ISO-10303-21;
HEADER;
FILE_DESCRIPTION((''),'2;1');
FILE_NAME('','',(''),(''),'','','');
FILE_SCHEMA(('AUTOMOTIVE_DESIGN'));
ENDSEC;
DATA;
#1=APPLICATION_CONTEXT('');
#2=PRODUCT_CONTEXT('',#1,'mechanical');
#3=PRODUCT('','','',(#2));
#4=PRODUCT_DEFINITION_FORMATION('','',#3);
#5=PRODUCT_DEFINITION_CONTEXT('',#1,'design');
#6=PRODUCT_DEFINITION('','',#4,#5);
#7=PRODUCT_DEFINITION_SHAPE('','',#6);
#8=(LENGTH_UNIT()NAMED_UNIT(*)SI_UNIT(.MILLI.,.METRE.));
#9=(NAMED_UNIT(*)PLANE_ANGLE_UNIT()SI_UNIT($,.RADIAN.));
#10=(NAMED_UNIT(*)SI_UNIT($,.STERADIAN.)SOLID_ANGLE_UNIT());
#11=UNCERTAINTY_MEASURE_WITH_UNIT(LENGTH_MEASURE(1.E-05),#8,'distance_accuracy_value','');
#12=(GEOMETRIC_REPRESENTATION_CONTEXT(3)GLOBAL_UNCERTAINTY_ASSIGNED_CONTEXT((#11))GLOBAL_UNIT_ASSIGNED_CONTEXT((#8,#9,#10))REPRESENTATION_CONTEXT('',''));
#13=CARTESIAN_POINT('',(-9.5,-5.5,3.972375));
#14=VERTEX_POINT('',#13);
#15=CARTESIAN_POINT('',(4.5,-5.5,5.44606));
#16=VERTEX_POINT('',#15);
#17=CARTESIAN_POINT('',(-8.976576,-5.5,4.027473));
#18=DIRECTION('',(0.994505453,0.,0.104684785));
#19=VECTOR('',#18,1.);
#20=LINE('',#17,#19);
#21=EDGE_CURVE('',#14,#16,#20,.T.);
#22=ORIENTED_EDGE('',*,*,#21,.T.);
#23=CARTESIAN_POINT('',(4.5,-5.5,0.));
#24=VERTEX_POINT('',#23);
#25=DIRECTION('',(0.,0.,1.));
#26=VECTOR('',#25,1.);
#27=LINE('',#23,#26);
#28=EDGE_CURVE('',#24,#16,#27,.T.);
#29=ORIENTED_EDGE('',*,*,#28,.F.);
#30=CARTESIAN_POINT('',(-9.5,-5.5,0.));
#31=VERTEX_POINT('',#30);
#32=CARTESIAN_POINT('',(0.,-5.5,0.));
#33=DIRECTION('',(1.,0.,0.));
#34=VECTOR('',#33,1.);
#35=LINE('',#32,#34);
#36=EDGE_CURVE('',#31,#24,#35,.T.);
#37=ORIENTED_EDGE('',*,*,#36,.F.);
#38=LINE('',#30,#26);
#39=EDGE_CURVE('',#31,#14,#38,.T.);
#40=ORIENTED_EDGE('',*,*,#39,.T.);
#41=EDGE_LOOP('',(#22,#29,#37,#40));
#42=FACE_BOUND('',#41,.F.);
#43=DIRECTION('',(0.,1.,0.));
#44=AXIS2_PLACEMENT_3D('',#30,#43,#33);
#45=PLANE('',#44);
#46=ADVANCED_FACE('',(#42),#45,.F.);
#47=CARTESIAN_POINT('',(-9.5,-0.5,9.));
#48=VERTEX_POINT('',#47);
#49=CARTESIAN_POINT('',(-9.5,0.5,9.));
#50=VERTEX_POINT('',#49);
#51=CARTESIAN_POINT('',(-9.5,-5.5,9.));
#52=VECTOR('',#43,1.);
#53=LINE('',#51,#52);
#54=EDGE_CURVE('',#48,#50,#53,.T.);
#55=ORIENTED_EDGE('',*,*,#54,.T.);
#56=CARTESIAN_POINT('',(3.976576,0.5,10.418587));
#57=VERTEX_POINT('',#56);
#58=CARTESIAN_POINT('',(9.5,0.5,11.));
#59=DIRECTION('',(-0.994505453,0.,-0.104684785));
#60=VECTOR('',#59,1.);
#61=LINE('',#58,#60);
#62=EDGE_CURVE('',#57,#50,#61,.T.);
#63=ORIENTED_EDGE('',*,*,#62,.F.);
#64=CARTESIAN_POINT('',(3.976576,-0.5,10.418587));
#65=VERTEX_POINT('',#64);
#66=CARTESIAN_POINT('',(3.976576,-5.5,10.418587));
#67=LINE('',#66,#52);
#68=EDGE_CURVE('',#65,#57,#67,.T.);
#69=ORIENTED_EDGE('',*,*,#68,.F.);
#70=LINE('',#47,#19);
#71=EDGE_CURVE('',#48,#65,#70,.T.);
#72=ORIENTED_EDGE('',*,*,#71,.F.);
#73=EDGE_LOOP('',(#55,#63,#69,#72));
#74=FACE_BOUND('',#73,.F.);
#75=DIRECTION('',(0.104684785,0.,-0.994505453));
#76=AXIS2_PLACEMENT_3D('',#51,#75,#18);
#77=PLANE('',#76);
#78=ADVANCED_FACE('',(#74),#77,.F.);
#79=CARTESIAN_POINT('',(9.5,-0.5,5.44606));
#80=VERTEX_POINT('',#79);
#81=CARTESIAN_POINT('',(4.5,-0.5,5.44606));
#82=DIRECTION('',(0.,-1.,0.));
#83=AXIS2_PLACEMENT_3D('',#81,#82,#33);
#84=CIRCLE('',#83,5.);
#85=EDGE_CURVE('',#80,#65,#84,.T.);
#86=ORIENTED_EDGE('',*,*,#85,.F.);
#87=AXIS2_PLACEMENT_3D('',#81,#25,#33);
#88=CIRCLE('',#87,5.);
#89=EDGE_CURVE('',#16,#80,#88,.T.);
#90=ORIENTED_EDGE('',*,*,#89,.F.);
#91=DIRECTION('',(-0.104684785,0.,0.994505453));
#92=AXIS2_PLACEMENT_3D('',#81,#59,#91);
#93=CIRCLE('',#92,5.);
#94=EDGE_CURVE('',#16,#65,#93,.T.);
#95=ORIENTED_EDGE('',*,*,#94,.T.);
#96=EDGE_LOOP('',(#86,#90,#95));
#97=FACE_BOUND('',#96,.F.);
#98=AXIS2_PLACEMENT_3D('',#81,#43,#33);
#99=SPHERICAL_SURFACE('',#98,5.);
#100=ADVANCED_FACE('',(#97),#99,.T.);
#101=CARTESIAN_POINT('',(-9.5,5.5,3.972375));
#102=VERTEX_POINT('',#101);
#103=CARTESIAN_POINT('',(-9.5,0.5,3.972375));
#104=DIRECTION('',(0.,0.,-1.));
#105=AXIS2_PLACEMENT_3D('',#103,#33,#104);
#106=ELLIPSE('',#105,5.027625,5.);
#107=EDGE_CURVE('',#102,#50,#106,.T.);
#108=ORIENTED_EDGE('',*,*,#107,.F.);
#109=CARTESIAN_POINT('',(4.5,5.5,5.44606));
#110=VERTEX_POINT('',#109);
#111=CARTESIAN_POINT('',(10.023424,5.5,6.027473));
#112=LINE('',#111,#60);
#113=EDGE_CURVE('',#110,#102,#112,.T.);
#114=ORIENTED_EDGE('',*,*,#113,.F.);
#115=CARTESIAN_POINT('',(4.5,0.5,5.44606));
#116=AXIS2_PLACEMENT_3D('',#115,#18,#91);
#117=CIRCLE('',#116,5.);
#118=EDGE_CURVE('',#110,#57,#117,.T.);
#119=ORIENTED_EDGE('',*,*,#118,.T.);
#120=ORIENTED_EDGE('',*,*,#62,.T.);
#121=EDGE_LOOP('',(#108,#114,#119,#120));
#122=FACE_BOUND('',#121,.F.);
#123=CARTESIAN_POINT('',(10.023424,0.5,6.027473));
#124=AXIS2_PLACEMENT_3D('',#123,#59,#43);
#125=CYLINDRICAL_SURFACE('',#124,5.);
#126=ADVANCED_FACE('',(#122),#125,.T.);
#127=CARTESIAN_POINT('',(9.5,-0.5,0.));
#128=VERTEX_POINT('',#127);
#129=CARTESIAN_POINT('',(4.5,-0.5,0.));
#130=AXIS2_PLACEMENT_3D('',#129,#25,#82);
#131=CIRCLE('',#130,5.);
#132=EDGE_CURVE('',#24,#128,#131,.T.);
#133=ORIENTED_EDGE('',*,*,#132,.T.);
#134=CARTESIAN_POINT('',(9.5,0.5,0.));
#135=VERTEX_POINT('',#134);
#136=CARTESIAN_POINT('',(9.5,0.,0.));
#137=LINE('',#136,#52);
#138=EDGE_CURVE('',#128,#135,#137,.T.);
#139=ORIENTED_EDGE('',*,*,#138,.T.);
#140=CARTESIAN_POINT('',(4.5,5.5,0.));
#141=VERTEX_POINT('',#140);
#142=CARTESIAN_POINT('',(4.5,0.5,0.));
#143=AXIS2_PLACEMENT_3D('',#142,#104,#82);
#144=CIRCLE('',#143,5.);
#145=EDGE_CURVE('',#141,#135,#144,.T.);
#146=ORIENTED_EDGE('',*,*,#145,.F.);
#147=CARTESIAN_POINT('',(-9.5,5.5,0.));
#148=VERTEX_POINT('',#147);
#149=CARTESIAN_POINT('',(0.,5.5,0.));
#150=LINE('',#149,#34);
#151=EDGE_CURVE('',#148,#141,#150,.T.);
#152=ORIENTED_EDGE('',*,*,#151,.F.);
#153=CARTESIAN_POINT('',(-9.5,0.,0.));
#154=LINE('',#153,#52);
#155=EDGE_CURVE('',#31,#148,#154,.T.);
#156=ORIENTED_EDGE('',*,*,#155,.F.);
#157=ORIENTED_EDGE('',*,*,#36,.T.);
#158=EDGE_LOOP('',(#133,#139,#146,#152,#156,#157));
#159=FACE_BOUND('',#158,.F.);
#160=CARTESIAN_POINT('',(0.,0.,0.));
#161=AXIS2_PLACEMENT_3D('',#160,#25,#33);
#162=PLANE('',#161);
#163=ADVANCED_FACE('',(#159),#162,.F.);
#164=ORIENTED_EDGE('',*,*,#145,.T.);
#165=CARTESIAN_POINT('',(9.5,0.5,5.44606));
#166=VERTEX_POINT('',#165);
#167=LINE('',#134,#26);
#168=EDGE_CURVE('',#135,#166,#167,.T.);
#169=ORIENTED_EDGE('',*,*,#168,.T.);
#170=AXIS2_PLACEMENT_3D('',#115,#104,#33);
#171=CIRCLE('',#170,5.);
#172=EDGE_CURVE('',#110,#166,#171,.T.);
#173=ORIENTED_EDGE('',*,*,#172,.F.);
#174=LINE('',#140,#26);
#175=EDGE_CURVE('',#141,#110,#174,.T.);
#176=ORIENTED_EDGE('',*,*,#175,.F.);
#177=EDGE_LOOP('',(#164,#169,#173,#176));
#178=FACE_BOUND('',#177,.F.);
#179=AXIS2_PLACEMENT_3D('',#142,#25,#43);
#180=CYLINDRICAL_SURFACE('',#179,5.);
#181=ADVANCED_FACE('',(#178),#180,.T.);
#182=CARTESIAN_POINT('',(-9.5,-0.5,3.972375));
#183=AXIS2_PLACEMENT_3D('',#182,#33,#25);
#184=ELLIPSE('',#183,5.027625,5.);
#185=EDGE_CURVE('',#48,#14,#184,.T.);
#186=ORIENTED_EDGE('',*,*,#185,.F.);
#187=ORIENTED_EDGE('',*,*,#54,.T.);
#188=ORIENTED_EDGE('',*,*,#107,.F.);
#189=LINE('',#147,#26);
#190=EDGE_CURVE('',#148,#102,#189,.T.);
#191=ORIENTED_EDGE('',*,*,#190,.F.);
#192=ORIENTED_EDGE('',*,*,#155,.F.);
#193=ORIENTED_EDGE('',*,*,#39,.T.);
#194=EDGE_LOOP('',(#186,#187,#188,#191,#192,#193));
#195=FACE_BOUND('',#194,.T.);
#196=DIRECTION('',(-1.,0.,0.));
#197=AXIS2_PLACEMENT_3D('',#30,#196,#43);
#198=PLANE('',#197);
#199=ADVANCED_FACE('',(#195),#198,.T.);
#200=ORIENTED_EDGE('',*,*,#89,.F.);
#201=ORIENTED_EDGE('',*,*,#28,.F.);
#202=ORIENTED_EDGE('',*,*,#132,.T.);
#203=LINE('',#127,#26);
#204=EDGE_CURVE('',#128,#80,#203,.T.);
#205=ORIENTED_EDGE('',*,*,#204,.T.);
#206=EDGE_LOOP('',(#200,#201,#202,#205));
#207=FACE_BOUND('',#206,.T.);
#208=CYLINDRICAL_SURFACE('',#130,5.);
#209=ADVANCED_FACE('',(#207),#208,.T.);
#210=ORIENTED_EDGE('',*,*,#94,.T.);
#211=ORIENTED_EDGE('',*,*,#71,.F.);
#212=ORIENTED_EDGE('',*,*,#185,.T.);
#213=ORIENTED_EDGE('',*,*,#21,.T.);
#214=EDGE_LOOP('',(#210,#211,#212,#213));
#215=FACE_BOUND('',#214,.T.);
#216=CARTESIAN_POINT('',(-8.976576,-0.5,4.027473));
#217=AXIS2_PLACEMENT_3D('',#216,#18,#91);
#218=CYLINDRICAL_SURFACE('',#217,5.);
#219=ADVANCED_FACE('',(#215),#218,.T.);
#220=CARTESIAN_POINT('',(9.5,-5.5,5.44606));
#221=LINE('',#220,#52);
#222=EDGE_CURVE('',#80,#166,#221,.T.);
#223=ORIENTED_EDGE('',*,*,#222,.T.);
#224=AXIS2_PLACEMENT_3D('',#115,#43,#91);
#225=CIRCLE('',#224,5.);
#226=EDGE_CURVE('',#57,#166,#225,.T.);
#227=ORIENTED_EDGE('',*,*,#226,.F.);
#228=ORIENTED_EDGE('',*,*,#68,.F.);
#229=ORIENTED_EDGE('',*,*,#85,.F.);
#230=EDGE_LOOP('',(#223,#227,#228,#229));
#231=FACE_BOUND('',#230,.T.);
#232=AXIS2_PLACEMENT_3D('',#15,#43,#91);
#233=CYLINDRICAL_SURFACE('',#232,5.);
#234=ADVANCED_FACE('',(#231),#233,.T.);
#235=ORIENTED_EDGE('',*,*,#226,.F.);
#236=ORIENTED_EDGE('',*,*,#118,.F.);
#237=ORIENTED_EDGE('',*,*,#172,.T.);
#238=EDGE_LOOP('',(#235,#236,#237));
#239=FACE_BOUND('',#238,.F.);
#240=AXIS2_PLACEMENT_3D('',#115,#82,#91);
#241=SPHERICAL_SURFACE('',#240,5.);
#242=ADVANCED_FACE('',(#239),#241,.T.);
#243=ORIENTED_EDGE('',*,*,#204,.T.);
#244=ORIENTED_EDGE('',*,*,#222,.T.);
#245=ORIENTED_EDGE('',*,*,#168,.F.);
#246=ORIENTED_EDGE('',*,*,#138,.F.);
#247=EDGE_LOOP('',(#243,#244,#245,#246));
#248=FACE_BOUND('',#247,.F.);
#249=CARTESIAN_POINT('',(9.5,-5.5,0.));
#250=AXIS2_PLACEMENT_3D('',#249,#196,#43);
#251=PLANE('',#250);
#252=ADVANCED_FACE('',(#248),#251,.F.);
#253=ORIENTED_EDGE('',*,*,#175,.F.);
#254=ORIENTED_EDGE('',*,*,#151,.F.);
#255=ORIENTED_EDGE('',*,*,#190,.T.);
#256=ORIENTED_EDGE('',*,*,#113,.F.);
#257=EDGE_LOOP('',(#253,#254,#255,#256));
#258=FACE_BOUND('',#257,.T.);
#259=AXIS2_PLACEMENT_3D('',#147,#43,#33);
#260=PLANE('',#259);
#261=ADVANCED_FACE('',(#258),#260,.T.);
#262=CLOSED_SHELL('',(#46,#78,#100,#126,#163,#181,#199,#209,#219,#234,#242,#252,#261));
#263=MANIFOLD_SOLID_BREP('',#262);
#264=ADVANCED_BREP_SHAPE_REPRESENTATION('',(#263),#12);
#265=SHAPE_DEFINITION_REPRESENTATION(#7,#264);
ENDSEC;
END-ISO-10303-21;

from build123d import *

# Parameters (mm, degrees)
F0_W     = 19
F0_H     = 11
F1_DEPTH = 11
F3_DEPTH = 25
F4_R     = 5


with BuildPart() as f1:
    # F0 (on Top) → F1 (new body)
    with BuildSketch(Plane.XY):
        Rectangle(F0_W, F0_H)
    extrude(amount=F1_DEPTH)

    # F2 (on face) → F3 (cut)
    with BuildSketch(Plane.XZ.offset(5.5)):
        Polygon((-9.5, 11), (-9.5, 9), (9.5, 11), align=None)
    extrude(amount=-F3_DEPTH, mode=Mode.SUBTRACT)

    # F4
    f4_edges = [f1.edges().sort_by_distance(p)[0] for p in [
        (0, -5.5, 10),
        (9.5, 0, 11),
        (0, 5.5, 10),
        (9.5, -5.5, 5.5),
        (9.5, 5.5, 5.5),
    ]]
    fillet(f4_edges, radius=F4_R)


solid = f1.part
